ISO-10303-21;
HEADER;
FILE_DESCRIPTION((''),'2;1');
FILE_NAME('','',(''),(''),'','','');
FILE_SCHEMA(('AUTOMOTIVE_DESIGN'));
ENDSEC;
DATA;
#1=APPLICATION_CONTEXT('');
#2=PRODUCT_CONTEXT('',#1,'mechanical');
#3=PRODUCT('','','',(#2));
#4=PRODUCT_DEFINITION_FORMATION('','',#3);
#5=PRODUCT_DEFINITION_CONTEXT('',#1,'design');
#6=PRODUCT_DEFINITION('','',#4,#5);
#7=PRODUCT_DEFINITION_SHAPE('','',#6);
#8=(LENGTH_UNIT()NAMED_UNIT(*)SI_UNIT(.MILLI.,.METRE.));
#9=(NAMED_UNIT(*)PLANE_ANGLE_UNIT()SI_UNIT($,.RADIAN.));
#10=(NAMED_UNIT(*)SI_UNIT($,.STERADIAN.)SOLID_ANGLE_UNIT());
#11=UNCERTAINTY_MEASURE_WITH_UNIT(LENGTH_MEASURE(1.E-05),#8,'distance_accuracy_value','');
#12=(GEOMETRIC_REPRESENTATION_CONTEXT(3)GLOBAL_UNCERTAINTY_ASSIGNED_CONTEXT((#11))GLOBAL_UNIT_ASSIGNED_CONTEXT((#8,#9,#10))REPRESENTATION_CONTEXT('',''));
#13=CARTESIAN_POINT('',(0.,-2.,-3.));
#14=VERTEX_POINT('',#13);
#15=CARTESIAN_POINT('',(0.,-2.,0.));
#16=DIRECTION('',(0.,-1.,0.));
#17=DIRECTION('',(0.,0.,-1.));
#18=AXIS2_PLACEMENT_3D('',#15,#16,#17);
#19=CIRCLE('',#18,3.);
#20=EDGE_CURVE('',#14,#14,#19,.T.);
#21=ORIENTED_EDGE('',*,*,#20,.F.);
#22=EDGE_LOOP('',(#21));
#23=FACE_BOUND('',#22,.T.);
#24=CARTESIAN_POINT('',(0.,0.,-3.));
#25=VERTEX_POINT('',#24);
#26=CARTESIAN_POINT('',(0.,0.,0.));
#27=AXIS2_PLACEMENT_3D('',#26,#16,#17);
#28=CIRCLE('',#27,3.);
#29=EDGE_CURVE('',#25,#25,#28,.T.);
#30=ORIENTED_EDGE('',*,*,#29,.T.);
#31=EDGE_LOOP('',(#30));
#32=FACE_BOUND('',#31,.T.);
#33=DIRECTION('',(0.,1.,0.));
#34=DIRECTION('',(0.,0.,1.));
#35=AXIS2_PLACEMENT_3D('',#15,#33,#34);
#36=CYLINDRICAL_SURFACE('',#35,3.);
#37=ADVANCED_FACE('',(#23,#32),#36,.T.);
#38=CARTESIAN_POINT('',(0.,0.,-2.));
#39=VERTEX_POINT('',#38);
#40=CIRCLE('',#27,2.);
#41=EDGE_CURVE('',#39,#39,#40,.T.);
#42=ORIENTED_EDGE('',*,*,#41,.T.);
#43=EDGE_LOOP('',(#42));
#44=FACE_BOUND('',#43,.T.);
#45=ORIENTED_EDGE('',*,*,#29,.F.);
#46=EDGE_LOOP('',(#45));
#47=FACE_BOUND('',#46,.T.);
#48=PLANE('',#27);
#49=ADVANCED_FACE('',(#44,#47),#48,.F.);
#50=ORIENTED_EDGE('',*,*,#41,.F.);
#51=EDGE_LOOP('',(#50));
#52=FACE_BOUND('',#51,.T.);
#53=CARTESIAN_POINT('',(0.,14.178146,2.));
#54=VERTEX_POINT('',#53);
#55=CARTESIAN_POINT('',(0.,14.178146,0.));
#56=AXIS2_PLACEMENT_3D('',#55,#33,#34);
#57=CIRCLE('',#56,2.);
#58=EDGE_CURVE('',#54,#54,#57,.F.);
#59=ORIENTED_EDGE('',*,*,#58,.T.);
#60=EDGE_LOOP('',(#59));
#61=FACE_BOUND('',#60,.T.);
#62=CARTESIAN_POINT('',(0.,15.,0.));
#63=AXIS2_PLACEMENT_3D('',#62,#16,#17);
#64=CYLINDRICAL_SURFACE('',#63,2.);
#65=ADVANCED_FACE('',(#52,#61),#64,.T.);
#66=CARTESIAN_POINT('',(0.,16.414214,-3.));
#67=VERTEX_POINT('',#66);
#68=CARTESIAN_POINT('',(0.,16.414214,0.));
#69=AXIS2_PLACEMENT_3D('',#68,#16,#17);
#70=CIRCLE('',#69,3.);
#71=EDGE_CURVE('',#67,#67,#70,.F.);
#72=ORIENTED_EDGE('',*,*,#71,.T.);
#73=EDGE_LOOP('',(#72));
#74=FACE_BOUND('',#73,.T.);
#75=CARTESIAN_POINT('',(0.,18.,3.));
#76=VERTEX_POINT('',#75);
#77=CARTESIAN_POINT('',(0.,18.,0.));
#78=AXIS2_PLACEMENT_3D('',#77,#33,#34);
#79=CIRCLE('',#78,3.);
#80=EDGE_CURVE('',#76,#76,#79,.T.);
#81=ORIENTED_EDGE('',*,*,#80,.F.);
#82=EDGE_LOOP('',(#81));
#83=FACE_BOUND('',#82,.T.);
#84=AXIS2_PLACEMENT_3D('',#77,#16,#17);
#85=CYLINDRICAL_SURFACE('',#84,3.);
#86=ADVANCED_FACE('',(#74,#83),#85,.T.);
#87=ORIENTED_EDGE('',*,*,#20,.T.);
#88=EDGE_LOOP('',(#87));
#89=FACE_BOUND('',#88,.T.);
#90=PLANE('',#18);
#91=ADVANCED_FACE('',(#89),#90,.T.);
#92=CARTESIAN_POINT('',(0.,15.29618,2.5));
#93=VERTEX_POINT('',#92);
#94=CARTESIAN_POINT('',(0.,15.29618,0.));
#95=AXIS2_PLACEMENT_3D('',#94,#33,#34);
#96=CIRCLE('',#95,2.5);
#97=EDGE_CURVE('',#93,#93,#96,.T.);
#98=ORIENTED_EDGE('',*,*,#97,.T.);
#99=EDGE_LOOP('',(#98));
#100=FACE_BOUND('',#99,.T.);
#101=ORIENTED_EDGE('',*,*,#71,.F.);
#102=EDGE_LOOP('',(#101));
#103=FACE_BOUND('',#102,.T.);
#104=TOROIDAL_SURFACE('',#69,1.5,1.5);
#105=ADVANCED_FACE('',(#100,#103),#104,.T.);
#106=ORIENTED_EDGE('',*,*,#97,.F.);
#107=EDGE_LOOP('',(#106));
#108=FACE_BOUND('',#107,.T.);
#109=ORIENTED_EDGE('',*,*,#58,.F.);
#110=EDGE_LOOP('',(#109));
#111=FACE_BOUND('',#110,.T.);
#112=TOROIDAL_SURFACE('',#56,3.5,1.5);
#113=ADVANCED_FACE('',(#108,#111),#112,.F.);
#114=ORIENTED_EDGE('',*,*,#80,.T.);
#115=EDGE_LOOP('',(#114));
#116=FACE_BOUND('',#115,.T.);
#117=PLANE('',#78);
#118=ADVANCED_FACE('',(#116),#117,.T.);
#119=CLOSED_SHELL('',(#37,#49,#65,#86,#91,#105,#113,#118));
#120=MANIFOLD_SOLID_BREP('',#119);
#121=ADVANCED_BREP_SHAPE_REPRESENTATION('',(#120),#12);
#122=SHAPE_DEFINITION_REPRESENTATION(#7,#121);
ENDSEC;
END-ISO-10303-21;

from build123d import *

# Parameters (mm, degrees)
SKETCH1_R           = 2
ROD_EXTRUSION_DEPTH = 15
SKETCH2_R           = 3
BOSS_EXTRUDE2_DEPTH = 3
FILLET3_R           = 1.5
FILLET4_R           = 1.5
INNER_START         = 2
SKETCH3_R           = 3
INNER_TIP_DEPTH     = 2


with BuildPart() as part:
    # Sketch1 → rod extrusion (new body)
    with BuildSketch(Plane(origin=(0, 0, 0), x_dir=(1, 0, 0), z_dir=(0, 1, 0))):
        with Locations(Location((0, 0, 0), (0, 0, 270))):
            Circle(SKETCH1_R)
    extrude(amount=ROD_EXTRUSION_DEPTH)

    # Sketch2 → Boss-Extrude2 (add)
    with BuildSketch(Plane(origin=(0, 15, 0), x_dir=(1, 0, 0), z_dir=(0, 1, 0))):
        with Locations(Location((0, 0, 0), (0, 0, 270))):
            Circle(SKETCH2_R)
    extrude(amount=BOSS_EXTRUDE2_DEPTH)

    # Fillet3
    # the kernel refuses this fillet: 1.5 mm, written as the material it takes off along each edge
    with BuildSketch(Plane(origin=(0, 15, 0), x_dir=(0, 0, 1), z_dir=(-1, 0, 0))) as fillet3_piece_1:
        with BuildLine():
            CenterArc((1.5, 1.414213562), FILLET3_R, 289.471220634, 70.528779366)
            Line((2, 0), (2.01, -0.028284271))
            ThreePointArc((2.01, -0.028284271), (2.5, -0.03), (3, -0.03))
            Line((3, -0.03), (3.03, 0))
            Line((3.03, 0), (3.03, 1.414213562))
            Line((3.03, 1.414213562), (3, 1.414213562))
        make_face()
    revolve(axis=Axis((0, 15, 0), (0, 1, 0)), mode=Mode.SUBTRACT)

    # Fillet4
    fillet4_edges = [part.edges().sort_by_distance(p)[0] for p in [
        (0, 15, -2),
    ]]
    fillet(fillet4_edges, radius=FILLET4_R)

    # Sketch3 → inner tip (add)
    with BuildSketch(Plane.XZ.offset(INNER_START)):
        with Locations(Location((0, 0, 0), (0, 0, 270))):
            Circle(SKETCH3_R)
    extrude(amount=-INNER_TIP_DEPTH)


solid = part.part
